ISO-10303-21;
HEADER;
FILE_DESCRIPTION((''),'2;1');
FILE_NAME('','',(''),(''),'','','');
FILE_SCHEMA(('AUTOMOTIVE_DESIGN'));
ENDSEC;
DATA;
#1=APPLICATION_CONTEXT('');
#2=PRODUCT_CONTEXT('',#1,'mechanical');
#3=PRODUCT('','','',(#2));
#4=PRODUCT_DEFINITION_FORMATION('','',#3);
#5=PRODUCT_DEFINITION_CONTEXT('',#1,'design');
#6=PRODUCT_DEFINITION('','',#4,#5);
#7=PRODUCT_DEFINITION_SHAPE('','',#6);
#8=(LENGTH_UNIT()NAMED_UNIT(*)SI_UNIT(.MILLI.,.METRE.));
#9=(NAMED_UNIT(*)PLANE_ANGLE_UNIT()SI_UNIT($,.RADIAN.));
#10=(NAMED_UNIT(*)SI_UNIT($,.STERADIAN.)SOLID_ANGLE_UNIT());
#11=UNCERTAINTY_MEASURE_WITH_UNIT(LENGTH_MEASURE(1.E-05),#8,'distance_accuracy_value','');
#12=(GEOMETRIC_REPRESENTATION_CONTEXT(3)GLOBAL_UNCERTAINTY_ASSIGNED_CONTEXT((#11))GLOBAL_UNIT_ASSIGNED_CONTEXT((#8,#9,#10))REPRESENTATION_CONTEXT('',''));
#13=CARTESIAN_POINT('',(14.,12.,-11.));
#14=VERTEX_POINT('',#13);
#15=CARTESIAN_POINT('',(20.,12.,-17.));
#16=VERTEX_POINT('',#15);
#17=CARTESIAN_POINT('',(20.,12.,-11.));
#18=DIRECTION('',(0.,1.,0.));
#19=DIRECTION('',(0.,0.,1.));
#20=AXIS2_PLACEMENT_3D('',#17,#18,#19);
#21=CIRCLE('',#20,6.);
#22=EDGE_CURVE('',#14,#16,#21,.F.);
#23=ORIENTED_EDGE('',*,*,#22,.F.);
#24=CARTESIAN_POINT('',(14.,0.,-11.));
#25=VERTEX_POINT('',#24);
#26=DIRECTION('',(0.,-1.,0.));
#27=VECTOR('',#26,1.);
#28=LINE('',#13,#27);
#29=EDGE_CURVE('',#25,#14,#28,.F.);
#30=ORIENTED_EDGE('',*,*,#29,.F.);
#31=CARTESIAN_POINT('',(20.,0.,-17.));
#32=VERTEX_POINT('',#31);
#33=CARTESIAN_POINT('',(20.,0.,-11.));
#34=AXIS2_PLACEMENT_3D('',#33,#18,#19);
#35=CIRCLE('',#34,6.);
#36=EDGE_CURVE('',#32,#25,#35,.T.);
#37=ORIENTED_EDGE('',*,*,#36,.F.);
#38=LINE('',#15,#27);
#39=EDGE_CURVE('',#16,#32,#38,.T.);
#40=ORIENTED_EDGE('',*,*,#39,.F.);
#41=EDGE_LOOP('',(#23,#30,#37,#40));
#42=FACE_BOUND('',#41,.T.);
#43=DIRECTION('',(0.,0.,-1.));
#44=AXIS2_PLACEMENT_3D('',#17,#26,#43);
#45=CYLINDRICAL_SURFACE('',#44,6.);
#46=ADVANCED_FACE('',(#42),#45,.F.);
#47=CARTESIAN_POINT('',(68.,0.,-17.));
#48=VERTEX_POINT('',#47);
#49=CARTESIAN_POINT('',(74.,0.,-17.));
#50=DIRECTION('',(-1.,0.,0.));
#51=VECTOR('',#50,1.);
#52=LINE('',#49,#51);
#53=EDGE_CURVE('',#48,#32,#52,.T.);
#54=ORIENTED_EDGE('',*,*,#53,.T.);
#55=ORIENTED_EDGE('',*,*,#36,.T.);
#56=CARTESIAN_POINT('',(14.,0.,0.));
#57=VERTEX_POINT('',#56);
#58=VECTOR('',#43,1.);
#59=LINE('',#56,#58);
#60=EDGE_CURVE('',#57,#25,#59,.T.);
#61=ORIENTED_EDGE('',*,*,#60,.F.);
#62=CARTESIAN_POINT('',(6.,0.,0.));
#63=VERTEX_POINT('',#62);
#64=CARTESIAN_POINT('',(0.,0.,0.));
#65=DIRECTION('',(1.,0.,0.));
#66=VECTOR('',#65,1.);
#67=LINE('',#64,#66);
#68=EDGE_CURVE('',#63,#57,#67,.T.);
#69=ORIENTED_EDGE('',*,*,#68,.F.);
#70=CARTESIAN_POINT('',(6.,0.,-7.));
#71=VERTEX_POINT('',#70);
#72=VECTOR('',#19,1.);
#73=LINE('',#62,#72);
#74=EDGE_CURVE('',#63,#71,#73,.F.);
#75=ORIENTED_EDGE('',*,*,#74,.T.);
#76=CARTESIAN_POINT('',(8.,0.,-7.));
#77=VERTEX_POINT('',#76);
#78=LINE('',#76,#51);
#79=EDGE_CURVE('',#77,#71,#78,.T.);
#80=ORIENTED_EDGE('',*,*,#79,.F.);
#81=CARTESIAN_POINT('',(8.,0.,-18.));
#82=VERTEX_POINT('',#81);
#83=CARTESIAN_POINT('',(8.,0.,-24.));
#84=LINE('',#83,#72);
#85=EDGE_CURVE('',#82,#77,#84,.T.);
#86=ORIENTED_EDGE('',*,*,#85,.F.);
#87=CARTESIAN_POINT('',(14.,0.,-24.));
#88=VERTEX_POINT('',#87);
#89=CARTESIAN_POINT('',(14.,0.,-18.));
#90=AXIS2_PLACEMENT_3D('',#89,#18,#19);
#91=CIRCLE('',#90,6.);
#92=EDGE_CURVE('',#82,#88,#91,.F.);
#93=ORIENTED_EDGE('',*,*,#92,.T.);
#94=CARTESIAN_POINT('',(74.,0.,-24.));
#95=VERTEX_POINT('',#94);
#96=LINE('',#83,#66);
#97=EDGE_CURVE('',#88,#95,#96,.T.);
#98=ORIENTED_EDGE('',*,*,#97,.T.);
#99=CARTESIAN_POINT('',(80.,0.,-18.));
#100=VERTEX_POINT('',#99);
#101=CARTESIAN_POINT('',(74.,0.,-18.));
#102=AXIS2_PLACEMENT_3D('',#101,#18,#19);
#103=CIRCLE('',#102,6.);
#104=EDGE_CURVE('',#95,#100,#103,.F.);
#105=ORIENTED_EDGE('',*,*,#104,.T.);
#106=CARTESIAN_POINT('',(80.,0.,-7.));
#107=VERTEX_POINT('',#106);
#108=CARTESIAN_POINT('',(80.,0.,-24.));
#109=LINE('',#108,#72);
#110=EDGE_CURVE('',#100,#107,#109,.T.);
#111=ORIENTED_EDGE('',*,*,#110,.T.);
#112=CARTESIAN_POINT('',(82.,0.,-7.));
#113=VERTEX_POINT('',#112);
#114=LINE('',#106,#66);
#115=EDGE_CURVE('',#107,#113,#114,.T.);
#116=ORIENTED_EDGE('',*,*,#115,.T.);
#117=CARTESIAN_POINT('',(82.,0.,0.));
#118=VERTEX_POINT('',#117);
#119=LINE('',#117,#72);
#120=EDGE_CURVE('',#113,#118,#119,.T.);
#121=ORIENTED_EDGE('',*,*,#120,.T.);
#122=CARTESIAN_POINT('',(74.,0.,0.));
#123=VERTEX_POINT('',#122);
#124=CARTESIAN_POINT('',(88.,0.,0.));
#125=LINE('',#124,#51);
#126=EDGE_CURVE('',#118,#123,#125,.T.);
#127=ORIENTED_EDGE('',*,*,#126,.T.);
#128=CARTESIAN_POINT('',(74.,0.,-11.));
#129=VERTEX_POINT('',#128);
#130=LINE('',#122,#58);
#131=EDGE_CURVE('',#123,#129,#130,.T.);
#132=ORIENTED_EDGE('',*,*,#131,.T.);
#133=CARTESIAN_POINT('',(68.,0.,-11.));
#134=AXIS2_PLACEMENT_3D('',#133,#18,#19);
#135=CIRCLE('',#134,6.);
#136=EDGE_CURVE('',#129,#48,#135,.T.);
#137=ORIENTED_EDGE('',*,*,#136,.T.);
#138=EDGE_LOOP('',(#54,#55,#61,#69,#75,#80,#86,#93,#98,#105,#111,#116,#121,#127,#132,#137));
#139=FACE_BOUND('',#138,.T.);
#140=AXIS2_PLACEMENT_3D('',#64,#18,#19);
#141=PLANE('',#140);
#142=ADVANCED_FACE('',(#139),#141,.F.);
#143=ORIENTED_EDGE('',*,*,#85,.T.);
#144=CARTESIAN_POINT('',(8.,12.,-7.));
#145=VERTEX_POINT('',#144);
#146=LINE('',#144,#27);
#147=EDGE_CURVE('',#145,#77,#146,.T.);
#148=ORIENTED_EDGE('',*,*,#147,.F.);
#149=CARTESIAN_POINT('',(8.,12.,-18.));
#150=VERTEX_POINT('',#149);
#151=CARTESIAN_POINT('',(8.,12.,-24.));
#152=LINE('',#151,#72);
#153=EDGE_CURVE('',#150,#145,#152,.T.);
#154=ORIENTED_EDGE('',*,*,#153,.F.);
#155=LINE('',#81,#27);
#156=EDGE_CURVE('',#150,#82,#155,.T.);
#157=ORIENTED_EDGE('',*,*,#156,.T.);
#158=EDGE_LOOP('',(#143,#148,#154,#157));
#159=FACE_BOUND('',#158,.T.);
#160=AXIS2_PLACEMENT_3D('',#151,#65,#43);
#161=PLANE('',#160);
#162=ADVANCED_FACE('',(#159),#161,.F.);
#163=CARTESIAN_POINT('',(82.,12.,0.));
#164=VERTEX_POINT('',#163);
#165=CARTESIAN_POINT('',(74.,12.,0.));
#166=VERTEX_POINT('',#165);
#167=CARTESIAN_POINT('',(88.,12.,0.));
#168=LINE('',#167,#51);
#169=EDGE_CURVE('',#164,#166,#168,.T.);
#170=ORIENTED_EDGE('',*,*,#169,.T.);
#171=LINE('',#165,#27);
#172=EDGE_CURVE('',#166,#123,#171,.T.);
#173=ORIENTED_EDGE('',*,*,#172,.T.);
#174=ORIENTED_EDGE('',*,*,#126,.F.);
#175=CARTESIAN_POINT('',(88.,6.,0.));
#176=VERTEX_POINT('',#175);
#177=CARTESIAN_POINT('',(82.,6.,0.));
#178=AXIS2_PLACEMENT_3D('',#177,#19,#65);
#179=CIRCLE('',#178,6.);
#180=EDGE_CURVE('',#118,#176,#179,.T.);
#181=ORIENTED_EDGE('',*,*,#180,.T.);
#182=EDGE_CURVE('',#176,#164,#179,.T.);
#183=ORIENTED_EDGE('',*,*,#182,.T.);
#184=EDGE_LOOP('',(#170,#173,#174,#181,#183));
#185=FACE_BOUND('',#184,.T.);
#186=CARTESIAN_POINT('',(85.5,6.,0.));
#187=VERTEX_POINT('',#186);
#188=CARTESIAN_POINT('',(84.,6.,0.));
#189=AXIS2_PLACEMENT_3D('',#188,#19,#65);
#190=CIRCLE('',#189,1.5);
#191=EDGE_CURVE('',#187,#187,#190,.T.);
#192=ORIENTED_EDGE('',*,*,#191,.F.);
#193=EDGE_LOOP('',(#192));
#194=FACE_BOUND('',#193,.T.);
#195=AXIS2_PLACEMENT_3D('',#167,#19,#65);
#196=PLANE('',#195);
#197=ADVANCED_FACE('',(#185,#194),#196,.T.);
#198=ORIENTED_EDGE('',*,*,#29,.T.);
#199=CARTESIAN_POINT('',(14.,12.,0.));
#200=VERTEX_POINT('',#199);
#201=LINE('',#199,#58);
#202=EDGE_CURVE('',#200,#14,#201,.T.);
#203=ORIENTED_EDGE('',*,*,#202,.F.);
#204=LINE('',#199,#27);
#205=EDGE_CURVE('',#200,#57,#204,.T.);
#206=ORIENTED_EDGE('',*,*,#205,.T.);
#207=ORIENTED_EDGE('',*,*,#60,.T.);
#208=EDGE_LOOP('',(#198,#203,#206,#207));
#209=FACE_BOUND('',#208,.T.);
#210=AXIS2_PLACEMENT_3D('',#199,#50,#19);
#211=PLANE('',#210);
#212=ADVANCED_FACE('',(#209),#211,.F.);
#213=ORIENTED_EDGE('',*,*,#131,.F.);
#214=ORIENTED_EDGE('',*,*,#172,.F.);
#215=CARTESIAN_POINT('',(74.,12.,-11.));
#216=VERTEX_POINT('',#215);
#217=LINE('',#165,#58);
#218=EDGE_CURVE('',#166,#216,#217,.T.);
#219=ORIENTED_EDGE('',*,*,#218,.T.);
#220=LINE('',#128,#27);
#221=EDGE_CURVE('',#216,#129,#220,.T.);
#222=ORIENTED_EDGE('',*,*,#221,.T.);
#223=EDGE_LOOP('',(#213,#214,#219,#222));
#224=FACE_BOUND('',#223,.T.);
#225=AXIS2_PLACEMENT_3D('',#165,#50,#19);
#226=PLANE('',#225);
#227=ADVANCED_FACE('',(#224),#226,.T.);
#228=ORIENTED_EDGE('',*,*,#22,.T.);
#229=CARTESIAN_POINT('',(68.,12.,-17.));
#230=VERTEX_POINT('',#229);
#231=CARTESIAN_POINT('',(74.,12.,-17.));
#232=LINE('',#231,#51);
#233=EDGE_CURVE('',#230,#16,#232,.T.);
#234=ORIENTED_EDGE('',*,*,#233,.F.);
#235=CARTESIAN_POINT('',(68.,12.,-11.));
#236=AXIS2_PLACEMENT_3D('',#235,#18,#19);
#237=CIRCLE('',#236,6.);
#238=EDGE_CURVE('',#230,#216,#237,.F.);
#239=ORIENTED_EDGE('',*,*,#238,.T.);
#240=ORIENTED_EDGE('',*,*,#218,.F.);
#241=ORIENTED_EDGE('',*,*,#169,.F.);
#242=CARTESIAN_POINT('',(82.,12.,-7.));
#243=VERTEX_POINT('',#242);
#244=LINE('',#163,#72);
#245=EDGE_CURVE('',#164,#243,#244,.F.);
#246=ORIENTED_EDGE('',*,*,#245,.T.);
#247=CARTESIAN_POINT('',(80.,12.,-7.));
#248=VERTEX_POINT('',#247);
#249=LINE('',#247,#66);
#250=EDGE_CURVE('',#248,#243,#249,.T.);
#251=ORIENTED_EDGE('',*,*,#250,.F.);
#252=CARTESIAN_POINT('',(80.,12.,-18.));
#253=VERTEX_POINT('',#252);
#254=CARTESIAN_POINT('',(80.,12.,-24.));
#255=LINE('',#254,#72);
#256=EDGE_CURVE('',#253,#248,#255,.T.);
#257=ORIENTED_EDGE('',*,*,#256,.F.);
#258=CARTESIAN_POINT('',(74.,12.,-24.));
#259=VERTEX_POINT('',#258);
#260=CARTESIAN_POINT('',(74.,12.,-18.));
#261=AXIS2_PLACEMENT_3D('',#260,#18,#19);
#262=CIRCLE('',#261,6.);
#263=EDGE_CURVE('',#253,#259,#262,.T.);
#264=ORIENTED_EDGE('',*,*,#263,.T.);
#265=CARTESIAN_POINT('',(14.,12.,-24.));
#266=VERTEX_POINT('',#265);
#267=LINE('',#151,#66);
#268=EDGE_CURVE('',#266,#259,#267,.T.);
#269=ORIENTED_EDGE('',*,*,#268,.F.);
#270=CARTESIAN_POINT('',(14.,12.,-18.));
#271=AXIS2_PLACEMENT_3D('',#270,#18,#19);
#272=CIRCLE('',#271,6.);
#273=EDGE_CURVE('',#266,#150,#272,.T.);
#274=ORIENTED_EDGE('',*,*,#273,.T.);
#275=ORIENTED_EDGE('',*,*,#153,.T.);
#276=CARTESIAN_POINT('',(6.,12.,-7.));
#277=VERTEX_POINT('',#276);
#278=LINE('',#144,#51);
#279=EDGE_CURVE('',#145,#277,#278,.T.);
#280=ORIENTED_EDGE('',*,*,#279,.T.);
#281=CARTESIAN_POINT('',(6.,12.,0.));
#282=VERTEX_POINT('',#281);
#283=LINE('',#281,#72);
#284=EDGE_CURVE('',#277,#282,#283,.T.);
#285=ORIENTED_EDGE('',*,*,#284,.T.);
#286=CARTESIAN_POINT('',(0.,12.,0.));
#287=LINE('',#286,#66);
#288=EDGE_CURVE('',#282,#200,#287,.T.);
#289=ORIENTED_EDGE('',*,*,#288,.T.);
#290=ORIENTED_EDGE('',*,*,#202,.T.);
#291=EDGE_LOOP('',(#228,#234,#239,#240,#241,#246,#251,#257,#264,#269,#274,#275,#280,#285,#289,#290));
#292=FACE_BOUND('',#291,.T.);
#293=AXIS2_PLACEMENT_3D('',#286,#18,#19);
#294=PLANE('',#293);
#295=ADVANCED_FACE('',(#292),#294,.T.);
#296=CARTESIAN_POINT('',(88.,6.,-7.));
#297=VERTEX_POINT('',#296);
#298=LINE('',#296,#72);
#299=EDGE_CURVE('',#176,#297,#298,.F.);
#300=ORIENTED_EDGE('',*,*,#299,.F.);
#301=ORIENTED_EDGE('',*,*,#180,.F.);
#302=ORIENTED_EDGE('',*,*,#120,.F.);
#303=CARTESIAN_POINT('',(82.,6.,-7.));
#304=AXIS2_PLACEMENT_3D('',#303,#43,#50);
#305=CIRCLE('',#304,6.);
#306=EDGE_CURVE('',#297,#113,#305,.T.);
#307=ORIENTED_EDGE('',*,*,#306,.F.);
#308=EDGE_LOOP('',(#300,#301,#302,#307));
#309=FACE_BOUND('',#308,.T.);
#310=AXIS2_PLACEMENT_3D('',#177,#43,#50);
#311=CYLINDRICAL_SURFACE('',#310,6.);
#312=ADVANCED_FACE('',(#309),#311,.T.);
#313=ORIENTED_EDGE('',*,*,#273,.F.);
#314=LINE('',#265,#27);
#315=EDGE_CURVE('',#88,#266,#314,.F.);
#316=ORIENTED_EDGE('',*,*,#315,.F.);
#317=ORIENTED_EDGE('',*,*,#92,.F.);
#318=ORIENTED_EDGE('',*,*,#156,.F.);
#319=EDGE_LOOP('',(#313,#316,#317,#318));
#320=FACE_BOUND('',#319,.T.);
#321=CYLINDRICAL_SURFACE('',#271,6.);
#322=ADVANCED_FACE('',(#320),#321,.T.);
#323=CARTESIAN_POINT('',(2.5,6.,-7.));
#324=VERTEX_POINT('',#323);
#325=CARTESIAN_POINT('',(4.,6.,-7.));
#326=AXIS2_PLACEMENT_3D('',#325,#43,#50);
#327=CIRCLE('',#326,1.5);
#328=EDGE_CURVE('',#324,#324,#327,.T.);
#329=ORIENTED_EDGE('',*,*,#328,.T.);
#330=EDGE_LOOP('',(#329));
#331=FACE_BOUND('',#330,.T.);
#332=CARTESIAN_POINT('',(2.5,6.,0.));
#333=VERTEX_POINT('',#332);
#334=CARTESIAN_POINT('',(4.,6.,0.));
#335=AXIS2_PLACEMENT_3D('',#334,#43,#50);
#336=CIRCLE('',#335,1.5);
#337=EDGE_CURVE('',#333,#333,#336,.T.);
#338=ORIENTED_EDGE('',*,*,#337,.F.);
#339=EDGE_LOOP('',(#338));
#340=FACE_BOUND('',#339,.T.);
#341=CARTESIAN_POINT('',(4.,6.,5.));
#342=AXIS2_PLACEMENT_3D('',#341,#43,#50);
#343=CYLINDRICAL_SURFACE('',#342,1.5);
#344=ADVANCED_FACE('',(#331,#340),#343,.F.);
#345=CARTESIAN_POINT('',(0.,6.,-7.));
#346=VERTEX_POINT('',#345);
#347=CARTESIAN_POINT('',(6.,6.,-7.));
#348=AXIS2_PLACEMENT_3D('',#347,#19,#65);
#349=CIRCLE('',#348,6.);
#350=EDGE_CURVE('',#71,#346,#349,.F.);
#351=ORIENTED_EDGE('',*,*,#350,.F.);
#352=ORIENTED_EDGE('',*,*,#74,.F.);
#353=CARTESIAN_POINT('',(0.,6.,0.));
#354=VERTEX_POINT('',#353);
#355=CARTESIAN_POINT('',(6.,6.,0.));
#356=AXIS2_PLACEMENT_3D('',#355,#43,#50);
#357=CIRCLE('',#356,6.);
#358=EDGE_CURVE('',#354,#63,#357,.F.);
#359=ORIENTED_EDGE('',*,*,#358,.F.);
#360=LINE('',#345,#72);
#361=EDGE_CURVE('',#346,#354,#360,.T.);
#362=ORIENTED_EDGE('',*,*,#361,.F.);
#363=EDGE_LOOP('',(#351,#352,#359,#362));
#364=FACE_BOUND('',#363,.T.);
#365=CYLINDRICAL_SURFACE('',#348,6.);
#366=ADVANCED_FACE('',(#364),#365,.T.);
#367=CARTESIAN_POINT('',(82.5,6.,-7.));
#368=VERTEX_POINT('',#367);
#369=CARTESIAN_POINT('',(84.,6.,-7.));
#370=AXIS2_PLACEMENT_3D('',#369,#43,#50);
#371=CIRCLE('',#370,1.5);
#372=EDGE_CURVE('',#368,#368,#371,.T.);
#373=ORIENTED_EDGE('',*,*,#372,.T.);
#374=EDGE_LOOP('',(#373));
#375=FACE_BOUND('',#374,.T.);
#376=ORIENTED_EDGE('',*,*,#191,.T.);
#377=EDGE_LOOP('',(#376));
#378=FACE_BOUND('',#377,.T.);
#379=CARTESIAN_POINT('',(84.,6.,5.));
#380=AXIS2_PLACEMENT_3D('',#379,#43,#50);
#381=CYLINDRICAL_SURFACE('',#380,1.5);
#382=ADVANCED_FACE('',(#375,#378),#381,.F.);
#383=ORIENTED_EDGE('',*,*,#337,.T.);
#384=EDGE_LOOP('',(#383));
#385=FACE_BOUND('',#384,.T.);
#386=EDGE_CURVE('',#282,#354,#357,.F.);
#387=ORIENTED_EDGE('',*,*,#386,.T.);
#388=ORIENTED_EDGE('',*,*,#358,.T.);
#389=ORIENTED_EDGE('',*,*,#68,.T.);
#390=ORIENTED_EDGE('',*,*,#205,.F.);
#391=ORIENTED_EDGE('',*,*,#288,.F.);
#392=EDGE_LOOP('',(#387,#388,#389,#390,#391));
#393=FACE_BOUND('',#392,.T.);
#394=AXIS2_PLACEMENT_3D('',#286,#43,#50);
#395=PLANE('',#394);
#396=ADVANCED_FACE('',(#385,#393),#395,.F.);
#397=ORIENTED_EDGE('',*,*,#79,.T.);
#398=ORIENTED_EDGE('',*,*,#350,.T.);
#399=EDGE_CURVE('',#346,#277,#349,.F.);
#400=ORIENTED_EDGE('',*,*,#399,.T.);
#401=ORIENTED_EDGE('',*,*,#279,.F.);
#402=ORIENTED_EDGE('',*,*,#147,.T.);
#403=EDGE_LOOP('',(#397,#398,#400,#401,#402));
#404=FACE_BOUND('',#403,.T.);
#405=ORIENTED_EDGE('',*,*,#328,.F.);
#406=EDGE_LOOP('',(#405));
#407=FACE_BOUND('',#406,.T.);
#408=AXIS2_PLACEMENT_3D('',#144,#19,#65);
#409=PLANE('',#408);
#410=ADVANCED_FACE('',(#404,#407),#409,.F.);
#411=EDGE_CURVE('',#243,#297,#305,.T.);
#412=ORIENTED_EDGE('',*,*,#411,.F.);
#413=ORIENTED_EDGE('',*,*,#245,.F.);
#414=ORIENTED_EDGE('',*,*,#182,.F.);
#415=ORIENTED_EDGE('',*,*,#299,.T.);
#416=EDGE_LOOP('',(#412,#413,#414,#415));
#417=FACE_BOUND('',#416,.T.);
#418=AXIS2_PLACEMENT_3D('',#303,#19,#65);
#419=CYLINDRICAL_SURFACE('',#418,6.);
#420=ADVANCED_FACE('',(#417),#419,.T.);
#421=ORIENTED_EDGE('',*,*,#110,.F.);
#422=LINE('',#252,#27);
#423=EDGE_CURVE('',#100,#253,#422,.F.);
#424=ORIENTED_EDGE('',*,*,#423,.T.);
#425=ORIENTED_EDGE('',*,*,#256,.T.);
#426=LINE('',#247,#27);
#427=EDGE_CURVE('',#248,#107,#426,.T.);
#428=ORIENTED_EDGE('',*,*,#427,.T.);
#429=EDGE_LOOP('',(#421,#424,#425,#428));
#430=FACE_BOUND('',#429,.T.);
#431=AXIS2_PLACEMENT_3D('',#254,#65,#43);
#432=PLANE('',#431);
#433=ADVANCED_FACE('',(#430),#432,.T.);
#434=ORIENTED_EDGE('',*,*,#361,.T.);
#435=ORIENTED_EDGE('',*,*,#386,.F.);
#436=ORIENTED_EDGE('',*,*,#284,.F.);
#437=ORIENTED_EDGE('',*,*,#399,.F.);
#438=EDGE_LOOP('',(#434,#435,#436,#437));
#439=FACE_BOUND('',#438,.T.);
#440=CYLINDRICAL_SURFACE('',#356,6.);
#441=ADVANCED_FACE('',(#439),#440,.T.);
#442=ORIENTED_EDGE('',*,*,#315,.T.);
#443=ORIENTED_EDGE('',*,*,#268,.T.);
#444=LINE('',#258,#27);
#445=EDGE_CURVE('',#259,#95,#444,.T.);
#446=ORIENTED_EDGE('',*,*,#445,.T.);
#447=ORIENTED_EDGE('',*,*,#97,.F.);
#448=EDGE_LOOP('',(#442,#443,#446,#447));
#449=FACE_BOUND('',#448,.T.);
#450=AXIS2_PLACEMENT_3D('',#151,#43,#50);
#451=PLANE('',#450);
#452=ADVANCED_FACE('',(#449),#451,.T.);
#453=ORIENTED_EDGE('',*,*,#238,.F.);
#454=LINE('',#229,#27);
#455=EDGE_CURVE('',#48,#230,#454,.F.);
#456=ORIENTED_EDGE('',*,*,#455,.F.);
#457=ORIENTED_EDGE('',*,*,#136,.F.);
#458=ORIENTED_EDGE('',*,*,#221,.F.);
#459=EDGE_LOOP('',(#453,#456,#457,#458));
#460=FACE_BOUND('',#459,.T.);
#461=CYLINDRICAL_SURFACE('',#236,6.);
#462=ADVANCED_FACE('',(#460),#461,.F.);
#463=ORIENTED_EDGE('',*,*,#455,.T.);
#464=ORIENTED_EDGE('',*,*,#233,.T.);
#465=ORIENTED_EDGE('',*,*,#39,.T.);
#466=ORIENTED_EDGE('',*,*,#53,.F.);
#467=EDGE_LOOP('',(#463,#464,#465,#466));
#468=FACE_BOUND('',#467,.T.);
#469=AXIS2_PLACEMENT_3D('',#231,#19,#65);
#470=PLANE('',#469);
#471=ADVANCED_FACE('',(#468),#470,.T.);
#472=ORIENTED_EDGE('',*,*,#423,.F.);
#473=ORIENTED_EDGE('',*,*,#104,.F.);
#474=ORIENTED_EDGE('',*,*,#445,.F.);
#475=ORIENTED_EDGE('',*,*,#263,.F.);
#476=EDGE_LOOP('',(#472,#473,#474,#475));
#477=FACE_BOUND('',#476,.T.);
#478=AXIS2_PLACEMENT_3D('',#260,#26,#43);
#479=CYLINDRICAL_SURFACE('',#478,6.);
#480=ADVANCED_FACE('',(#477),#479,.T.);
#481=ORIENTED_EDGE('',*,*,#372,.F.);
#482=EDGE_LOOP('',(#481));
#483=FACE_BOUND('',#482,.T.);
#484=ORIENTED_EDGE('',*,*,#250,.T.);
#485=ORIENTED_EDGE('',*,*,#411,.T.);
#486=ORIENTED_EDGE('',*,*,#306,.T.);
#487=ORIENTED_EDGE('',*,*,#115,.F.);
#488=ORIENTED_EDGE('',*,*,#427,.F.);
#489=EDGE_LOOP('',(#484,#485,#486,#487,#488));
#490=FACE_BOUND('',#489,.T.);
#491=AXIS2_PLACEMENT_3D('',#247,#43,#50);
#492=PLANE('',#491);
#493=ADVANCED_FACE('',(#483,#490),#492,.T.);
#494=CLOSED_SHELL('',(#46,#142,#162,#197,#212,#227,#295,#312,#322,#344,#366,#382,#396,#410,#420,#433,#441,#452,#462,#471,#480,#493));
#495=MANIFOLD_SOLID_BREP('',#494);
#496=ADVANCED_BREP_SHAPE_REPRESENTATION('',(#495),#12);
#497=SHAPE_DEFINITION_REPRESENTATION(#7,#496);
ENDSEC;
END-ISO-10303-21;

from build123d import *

# Parameters (mm, degrees)
EXTRUDE_2_DEPTH     = 12
SKETCH_6_R          = 1.5
CUT_EXTRUDE_2_DEPTH = 12
FILLET_2_R          = 6


with BuildPart() as part:
    # 草图3 → 凸台-拉伸2 (new body)
    with BuildSketch(Plane(origin=(0, 0, 0), x_dir=(1, 0, 0), z_dir=(0, 1, 0))):
        Polygon((0, 0), (14, 0), (14, 17), (74, 17), (74, 0), (88, 0), (88, 7), (80, 7), (80, 24), (8, 24), (8, 7), (0, 7), align=None)
    extrude(amount=EXTRUDE_2_DEPTH)

    # 草图6 → 切除-拉伸2 (cut)
    with BuildSketch(Plane(origin=(0, 0, -7), x_dir=(-1, 0, 0), z_dir=(0, 0, -1))):
        with Locations((-4, 6)):
            Circle(SKETCH_6_R)
        with Locations((-84, 6)):
            Circle(SKETCH_6_R)
    extrude(amount=-CUT_EXTRUDE_2_DEPTH, mode=Mode.SUBTRACT)

    # 圆角2
    fillet_2_edges = [part.edges().sort_by_distance(p)[0] for p in [
        (14, 6, -17),
        (8, 6, -24),
        (80, 6, -24),
        (74, 6, -17),
        (0, 12, -3.5),
        (0, 0, -3.5),
        (88, 12, -3.5),
        (88, 0, -3.5),
    ]]
    fillet(fillet_2_edges, radius=FILLET_2_R - 0.0001)  # a hair under: the kernel refuses the full size


solid = part.part
